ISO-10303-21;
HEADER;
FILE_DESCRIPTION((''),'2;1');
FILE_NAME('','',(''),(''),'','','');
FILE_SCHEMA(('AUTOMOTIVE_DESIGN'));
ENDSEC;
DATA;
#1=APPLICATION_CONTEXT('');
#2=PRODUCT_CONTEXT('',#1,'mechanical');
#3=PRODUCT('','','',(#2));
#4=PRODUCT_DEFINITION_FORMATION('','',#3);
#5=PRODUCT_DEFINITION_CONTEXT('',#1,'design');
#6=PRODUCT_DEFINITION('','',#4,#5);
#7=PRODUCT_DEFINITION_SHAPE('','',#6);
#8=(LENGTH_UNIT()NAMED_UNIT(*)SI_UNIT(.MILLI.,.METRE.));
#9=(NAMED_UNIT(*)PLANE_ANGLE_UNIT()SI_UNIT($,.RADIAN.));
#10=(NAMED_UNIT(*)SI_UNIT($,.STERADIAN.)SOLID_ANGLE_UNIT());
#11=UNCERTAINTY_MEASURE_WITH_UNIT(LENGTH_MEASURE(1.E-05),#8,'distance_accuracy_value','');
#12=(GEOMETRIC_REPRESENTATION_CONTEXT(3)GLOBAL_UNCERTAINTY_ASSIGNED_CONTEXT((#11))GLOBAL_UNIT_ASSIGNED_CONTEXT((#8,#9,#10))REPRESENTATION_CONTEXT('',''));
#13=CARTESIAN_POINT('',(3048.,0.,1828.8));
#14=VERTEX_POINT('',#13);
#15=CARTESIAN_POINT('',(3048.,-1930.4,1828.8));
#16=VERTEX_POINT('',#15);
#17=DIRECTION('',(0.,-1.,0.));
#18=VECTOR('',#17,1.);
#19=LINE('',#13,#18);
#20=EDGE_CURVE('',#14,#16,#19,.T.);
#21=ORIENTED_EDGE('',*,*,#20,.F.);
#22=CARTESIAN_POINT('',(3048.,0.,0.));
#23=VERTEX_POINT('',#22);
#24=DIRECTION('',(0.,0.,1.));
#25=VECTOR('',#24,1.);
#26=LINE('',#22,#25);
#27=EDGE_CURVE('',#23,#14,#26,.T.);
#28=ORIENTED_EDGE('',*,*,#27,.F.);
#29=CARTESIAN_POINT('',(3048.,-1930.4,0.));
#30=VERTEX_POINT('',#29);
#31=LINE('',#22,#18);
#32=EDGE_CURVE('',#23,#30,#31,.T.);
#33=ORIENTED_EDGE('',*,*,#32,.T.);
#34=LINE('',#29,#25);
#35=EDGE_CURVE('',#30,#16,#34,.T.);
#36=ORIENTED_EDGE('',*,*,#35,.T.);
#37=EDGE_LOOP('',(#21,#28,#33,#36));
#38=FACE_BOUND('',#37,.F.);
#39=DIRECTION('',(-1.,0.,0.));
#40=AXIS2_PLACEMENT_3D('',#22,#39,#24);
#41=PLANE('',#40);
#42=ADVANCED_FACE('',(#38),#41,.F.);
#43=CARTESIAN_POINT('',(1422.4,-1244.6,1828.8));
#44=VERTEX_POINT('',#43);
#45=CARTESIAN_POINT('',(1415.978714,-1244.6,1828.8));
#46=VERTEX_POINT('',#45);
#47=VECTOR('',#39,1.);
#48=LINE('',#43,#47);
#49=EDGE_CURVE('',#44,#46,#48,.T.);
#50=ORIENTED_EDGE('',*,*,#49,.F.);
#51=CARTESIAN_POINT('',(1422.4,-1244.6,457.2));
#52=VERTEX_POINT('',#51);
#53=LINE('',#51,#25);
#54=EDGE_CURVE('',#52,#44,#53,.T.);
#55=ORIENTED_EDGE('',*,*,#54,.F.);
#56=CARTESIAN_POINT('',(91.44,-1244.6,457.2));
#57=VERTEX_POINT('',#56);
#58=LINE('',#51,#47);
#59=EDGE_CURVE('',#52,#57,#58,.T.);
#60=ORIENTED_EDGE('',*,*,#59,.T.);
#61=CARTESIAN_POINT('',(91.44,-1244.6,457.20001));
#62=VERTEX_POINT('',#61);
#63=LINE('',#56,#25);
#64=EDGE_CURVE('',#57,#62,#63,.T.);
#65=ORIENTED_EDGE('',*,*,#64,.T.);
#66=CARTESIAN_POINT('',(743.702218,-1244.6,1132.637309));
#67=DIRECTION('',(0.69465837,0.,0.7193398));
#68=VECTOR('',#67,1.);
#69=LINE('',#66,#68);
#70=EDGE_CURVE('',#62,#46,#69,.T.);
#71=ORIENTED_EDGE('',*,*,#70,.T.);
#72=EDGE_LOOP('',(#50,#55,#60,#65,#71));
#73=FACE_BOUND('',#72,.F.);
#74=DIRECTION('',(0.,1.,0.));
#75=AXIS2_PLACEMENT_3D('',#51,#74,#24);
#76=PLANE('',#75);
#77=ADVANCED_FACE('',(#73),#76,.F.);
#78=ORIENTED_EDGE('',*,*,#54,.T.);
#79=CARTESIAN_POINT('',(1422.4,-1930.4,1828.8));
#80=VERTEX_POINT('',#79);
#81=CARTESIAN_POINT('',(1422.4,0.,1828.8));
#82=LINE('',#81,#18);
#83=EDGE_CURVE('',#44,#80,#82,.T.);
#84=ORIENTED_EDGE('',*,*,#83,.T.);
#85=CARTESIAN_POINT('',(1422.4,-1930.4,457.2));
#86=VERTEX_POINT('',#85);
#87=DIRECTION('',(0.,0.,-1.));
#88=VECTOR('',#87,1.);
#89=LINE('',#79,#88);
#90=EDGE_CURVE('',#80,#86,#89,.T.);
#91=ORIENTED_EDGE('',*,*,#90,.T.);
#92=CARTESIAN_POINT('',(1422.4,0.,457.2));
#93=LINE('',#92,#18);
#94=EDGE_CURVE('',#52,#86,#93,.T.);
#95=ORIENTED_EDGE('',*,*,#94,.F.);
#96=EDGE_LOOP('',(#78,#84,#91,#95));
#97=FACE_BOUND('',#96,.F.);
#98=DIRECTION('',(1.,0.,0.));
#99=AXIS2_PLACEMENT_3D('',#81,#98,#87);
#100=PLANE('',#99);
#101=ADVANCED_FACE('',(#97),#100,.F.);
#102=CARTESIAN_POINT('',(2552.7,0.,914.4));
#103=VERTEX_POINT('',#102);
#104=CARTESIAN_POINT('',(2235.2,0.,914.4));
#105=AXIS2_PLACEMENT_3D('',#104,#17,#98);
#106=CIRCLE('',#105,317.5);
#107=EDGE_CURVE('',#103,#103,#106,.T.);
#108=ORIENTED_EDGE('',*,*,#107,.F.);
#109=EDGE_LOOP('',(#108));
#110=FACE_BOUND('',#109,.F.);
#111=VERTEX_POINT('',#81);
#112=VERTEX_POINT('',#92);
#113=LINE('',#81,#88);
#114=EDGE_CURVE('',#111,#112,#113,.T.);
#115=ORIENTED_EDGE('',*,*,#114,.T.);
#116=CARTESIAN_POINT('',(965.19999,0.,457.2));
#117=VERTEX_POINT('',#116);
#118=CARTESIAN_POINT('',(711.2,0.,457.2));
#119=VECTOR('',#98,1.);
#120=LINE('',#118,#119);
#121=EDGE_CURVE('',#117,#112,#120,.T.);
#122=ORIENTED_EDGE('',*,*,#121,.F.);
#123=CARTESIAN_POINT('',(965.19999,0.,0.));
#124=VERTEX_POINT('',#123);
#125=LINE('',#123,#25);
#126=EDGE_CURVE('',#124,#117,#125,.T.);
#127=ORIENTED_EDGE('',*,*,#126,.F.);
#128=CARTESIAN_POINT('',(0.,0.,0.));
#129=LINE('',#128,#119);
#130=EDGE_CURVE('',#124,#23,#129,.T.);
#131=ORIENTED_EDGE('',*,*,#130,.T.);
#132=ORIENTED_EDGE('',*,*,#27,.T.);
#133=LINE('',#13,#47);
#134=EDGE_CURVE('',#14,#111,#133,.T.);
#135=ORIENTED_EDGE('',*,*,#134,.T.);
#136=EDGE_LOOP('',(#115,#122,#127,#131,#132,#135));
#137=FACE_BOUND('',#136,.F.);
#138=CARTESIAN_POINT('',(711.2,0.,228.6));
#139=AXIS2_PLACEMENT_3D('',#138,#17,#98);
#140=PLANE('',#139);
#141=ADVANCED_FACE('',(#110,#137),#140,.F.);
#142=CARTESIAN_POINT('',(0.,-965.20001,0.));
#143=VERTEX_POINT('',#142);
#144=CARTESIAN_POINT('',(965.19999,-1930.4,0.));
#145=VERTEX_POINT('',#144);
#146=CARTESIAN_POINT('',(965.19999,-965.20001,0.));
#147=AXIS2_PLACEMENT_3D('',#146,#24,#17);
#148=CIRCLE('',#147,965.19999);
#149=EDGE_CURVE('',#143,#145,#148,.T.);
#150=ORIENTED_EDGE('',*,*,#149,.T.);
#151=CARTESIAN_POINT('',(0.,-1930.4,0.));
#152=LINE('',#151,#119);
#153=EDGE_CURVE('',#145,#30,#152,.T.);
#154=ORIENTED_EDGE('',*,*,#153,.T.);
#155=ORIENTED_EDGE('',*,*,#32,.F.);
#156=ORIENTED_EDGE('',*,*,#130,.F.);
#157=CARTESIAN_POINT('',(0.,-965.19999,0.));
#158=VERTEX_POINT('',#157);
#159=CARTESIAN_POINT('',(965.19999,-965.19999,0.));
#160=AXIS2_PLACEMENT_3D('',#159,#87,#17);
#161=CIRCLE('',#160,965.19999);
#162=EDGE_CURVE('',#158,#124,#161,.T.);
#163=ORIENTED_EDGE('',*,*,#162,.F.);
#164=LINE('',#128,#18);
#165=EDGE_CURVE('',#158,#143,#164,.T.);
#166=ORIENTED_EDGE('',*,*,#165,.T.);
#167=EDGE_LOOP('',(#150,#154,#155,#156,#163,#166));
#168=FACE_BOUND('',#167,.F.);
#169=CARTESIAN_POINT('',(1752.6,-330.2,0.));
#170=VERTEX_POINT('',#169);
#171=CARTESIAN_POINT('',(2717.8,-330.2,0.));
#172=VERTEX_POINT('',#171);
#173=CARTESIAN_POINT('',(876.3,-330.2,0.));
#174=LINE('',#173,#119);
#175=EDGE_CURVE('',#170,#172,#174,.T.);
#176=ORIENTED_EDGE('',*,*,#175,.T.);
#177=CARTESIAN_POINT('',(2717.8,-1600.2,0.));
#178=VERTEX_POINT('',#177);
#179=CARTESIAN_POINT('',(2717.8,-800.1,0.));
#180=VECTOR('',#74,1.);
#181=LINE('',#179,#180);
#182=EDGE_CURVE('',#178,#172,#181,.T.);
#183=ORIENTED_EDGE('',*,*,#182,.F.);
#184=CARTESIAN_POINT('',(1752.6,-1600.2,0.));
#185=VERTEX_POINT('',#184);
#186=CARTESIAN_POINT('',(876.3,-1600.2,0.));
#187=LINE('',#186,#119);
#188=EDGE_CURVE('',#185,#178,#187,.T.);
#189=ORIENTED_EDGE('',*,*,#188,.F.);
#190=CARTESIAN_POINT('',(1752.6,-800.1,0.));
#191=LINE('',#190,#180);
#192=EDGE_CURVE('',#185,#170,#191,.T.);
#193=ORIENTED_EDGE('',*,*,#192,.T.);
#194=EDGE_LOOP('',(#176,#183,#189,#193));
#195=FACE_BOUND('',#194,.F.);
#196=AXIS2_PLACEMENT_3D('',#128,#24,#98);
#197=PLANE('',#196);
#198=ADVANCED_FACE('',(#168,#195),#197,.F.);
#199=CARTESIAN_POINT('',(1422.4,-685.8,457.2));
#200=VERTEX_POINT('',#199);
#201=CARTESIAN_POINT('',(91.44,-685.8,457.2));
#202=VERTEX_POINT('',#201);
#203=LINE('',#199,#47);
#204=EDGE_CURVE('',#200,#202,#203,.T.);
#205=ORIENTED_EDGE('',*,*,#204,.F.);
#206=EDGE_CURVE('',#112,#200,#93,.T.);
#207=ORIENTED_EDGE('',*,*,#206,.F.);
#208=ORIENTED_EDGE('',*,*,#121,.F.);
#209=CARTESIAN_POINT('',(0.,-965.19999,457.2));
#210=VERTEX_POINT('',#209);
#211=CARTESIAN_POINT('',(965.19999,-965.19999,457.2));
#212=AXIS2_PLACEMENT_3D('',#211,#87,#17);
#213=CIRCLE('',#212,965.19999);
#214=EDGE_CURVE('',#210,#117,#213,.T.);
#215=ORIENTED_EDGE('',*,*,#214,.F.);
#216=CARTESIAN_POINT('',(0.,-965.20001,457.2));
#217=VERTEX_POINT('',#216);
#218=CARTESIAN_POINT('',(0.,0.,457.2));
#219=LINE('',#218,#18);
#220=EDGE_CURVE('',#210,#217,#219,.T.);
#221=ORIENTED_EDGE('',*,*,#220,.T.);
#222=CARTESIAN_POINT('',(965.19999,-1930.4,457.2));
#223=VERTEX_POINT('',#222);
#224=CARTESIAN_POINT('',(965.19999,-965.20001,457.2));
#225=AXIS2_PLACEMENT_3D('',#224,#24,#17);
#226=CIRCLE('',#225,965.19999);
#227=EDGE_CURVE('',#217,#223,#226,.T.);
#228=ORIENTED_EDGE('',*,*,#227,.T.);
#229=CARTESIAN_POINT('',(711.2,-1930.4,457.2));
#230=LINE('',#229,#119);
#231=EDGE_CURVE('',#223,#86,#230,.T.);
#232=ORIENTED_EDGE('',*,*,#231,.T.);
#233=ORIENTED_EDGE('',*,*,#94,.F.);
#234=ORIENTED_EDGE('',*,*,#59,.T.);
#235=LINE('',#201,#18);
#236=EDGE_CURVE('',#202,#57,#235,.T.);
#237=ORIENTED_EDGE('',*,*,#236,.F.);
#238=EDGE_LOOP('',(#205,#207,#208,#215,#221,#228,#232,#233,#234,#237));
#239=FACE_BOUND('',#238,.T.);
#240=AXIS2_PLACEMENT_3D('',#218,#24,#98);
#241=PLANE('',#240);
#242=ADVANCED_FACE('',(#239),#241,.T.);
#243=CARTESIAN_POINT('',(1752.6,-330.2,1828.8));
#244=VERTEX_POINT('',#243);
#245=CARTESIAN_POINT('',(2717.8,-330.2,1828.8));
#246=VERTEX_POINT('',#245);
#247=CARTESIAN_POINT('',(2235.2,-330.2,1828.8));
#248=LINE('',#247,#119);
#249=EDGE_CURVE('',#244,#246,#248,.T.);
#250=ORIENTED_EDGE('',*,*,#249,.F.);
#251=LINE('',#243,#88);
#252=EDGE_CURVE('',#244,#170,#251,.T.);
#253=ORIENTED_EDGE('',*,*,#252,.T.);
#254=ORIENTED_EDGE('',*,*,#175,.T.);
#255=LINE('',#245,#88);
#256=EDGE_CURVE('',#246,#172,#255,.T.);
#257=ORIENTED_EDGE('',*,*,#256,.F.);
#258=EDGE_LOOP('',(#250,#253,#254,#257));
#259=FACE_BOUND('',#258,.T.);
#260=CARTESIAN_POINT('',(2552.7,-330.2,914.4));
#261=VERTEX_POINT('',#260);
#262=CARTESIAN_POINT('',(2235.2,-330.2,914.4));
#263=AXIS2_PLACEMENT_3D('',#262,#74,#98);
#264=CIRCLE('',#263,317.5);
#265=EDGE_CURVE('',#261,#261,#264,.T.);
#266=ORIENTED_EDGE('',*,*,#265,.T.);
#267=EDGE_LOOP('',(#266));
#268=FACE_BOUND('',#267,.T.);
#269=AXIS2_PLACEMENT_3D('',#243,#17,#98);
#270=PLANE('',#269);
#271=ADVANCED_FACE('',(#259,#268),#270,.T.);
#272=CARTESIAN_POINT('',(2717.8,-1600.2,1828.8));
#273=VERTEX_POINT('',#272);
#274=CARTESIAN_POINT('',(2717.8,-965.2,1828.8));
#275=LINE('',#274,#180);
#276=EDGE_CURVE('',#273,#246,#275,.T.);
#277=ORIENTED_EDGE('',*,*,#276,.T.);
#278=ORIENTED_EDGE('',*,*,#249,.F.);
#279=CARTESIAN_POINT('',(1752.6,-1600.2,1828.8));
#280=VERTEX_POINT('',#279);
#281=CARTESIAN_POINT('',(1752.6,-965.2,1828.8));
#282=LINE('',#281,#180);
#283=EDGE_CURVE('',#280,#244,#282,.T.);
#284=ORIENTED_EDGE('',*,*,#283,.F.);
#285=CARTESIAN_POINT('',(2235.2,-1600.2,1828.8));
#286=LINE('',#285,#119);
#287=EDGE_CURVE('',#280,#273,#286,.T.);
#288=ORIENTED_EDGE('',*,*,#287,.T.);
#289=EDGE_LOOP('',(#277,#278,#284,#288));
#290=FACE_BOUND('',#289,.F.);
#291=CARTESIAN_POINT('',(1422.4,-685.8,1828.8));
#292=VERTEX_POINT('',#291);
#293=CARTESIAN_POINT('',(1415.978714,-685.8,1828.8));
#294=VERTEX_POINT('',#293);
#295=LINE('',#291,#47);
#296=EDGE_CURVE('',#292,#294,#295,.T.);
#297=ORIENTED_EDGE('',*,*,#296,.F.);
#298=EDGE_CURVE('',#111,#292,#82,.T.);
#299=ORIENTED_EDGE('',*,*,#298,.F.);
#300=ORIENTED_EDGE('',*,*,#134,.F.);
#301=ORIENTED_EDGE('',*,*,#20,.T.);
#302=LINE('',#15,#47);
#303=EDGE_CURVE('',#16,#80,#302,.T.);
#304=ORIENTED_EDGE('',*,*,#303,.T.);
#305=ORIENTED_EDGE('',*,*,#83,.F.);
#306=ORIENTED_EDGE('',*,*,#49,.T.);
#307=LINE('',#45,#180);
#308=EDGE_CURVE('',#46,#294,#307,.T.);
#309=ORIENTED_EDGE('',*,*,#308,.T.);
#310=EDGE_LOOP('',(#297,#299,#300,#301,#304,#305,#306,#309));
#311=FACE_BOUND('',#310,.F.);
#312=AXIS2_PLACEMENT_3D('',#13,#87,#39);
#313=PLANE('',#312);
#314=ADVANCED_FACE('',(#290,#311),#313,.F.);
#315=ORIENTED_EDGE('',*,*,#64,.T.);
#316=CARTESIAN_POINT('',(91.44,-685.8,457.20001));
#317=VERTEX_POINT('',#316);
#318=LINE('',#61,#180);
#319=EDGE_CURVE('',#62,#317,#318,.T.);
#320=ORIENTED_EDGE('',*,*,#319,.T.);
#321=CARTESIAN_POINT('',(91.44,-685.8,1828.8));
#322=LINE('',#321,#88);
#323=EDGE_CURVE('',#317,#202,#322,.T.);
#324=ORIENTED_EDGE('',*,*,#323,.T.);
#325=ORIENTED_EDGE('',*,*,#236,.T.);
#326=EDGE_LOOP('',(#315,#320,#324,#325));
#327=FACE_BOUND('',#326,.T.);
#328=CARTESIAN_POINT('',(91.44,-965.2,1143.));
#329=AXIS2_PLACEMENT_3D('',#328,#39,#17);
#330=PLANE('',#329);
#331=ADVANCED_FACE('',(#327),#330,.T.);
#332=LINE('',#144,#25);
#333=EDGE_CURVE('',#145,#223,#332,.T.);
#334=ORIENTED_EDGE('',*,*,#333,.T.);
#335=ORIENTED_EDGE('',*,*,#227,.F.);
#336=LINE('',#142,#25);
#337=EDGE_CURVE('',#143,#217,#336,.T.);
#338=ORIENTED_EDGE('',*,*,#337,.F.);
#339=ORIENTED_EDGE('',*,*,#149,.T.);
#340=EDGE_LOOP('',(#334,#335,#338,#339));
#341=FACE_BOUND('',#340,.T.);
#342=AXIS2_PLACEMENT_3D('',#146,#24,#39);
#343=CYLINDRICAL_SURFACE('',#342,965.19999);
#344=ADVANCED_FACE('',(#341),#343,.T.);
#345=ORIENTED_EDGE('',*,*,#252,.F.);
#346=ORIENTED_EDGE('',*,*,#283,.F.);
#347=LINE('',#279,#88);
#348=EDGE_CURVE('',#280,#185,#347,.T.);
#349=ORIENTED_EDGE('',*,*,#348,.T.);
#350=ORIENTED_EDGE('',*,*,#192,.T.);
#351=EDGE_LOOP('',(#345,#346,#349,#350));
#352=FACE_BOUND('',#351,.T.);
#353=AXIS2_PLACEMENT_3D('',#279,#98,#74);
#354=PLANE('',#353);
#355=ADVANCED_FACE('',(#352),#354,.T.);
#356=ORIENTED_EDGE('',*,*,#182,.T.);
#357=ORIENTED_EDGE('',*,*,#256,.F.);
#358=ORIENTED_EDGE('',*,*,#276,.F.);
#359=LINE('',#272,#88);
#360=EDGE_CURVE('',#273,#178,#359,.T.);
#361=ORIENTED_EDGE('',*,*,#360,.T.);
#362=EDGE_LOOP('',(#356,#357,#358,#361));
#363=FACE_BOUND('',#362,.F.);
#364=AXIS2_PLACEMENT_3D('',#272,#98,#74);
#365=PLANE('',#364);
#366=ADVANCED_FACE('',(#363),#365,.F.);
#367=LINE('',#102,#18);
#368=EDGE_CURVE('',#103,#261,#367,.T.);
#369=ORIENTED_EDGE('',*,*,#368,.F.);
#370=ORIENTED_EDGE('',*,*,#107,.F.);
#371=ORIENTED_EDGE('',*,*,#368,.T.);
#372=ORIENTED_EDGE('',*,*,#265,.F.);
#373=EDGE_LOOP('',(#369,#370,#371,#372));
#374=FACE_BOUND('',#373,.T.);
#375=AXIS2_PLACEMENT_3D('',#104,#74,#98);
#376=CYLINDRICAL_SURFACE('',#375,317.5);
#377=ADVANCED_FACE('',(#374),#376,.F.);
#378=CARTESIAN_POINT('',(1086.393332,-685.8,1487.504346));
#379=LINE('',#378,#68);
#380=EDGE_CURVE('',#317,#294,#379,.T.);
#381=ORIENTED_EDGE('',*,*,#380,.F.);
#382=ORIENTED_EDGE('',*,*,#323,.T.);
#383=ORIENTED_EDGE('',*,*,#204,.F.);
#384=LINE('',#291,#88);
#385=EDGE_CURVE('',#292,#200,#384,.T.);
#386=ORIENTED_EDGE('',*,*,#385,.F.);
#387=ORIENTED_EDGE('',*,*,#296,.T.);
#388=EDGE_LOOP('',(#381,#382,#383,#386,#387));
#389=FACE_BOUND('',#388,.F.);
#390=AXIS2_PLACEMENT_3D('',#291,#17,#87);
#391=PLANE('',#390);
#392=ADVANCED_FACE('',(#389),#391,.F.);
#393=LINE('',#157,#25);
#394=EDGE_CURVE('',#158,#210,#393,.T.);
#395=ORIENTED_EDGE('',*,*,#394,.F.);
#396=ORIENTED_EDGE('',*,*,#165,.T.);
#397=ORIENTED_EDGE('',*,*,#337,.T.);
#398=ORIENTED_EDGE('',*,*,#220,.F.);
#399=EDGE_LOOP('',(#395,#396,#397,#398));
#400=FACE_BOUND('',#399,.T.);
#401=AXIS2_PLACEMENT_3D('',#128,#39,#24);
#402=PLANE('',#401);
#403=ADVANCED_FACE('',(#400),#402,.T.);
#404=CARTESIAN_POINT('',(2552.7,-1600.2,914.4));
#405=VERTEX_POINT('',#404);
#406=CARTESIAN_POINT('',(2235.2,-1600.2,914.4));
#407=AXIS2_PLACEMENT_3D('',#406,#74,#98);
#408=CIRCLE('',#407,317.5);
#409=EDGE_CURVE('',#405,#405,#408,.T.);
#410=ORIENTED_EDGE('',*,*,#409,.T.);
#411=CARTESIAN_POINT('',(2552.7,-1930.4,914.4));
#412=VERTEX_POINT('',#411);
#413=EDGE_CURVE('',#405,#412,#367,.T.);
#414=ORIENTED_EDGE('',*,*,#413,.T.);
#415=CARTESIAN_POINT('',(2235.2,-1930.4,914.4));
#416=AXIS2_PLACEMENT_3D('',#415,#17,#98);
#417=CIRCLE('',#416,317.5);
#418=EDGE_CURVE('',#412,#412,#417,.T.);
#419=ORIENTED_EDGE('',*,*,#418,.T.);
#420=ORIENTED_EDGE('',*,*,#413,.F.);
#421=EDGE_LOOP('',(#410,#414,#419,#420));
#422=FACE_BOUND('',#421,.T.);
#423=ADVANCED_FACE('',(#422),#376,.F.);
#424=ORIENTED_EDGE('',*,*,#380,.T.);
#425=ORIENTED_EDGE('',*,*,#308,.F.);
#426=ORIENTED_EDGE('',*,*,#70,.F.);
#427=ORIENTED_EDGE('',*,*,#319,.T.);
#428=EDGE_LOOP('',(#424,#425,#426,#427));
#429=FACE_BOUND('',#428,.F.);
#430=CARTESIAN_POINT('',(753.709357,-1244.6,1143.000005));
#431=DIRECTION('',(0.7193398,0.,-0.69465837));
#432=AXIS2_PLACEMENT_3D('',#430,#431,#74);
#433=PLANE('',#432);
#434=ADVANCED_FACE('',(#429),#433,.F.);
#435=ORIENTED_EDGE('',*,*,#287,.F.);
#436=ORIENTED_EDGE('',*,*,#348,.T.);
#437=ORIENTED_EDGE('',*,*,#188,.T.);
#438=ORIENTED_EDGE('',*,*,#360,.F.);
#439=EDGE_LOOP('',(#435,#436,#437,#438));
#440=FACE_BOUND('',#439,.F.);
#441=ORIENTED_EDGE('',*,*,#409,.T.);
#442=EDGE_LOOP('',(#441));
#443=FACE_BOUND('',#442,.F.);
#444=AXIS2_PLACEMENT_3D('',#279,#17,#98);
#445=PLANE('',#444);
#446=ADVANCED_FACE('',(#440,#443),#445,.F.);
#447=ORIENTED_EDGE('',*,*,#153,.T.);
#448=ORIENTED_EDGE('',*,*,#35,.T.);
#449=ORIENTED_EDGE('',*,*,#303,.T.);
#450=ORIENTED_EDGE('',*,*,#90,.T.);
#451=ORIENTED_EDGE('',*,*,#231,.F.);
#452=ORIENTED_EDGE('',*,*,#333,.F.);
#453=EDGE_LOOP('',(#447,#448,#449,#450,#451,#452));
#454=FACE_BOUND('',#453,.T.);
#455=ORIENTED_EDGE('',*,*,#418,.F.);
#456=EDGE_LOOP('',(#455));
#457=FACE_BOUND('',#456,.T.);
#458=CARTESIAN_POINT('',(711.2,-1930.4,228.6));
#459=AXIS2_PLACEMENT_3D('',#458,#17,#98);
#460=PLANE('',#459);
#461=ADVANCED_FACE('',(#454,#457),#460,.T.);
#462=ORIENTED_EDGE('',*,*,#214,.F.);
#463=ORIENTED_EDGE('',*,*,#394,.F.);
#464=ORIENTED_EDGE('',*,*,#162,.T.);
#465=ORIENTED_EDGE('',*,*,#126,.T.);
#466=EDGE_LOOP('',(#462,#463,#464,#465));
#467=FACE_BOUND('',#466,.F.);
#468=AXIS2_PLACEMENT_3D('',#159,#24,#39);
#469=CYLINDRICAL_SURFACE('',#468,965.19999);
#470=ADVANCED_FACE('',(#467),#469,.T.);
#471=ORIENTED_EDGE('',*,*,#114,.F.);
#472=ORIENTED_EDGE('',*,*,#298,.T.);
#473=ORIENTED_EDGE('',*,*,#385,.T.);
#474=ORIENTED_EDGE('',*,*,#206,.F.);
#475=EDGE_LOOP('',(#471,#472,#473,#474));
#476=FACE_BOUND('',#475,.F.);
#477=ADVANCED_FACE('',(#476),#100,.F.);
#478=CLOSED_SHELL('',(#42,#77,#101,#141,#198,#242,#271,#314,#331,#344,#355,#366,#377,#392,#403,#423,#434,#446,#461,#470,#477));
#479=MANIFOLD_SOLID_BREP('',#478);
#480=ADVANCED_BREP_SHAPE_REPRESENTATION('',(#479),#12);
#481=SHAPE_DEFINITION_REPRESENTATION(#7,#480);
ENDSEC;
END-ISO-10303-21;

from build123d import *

# Parameters (mm, degrees)
F0_W     = 1422.4
F0_H     = 457.2
F0_R     = 317.5
F1_DEPTH = 1930.4
F2_R     = 965.19999
F4_DEPTH = 1330.96
F5_SIZE2 = 1324.538714
F5_SIZE  = 1371.59999
F6_W     = 965.2
F6_H     = 1270
F7_DEPTH = 4841.24


# Not quite as in the source:
# - a fillet or chamfer is up to 0.001 mm smaller than in the source, because OpenCascade refuses the exact size


with BuildPart() as f1:
    # F0 (on Front) → F1 (new body)
    with BuildSketch(Plane.XZ):
        with Locations((711.2, 228.6)):
            Rectangle(F0_W, F0_H)
        Polygon((1422.4, 457.2), (1422.4, 0), (3048, 0), (3048, 1828.8), (1422.4, 1828.8), align=None)
        with Locations((2235.2, 914.4)):
            Circle(F0_R, mode=Mode.SUBTRACT)
    extrude(amount=F1_DEPTH)

    # F2 (radius 965.2 in the source; OpenCascade refuses exactly that, so slightly less here)
    f2_edges = [f1.edges().sort_by_distance(p)[0] for p in [
        (0, 0, 228.6),
        (0, -1930.4, 228.6),
    ]]
    fillet(f2_edges, radius=F2_R)

    # F3 (on face) → F4 (join)
    with BuildSketch(Plane(origin=(1422.4, 0, 0), x_dir=(0, -1, 0), z_dir=(-1, 0, 0))):
        Polygon((1244.6, 1354.5855283737), (1244.6, 1828.8), (685.8, 1828.8), (685.8, 457.2), (1244.6, 457.2), align=None)
    extrude(amount=F4_DEPTH)

    # F5 (size 1371.6 and 1324.5387235254 in the source; OpenCascade refuses exactly that, so slightly less here)
    f5_edges = [f1.edges().sort_by_distance(p)[0] for p in [
        (91.44, -965.2, 1828.8),
    ]]
    f5_side = f1.faces().sort_by_distance((91.44, -965.2, 1143))[0]
    chamfer(f5_edges, length=F5_SIZE, length2=F5_SIZE2, reference=f5_side)

    # F6 (on face) → F7 (cut)
    with BuildSketch(Plane.XY.offset(1828.8)):
        with Locations((2235.2, -965.2)):
            Rectangle(F6_W, F6_H)
    extrude(amount=-F7_DEPTH, mode=Mode.SUBTRACT)


solid = f1.part
